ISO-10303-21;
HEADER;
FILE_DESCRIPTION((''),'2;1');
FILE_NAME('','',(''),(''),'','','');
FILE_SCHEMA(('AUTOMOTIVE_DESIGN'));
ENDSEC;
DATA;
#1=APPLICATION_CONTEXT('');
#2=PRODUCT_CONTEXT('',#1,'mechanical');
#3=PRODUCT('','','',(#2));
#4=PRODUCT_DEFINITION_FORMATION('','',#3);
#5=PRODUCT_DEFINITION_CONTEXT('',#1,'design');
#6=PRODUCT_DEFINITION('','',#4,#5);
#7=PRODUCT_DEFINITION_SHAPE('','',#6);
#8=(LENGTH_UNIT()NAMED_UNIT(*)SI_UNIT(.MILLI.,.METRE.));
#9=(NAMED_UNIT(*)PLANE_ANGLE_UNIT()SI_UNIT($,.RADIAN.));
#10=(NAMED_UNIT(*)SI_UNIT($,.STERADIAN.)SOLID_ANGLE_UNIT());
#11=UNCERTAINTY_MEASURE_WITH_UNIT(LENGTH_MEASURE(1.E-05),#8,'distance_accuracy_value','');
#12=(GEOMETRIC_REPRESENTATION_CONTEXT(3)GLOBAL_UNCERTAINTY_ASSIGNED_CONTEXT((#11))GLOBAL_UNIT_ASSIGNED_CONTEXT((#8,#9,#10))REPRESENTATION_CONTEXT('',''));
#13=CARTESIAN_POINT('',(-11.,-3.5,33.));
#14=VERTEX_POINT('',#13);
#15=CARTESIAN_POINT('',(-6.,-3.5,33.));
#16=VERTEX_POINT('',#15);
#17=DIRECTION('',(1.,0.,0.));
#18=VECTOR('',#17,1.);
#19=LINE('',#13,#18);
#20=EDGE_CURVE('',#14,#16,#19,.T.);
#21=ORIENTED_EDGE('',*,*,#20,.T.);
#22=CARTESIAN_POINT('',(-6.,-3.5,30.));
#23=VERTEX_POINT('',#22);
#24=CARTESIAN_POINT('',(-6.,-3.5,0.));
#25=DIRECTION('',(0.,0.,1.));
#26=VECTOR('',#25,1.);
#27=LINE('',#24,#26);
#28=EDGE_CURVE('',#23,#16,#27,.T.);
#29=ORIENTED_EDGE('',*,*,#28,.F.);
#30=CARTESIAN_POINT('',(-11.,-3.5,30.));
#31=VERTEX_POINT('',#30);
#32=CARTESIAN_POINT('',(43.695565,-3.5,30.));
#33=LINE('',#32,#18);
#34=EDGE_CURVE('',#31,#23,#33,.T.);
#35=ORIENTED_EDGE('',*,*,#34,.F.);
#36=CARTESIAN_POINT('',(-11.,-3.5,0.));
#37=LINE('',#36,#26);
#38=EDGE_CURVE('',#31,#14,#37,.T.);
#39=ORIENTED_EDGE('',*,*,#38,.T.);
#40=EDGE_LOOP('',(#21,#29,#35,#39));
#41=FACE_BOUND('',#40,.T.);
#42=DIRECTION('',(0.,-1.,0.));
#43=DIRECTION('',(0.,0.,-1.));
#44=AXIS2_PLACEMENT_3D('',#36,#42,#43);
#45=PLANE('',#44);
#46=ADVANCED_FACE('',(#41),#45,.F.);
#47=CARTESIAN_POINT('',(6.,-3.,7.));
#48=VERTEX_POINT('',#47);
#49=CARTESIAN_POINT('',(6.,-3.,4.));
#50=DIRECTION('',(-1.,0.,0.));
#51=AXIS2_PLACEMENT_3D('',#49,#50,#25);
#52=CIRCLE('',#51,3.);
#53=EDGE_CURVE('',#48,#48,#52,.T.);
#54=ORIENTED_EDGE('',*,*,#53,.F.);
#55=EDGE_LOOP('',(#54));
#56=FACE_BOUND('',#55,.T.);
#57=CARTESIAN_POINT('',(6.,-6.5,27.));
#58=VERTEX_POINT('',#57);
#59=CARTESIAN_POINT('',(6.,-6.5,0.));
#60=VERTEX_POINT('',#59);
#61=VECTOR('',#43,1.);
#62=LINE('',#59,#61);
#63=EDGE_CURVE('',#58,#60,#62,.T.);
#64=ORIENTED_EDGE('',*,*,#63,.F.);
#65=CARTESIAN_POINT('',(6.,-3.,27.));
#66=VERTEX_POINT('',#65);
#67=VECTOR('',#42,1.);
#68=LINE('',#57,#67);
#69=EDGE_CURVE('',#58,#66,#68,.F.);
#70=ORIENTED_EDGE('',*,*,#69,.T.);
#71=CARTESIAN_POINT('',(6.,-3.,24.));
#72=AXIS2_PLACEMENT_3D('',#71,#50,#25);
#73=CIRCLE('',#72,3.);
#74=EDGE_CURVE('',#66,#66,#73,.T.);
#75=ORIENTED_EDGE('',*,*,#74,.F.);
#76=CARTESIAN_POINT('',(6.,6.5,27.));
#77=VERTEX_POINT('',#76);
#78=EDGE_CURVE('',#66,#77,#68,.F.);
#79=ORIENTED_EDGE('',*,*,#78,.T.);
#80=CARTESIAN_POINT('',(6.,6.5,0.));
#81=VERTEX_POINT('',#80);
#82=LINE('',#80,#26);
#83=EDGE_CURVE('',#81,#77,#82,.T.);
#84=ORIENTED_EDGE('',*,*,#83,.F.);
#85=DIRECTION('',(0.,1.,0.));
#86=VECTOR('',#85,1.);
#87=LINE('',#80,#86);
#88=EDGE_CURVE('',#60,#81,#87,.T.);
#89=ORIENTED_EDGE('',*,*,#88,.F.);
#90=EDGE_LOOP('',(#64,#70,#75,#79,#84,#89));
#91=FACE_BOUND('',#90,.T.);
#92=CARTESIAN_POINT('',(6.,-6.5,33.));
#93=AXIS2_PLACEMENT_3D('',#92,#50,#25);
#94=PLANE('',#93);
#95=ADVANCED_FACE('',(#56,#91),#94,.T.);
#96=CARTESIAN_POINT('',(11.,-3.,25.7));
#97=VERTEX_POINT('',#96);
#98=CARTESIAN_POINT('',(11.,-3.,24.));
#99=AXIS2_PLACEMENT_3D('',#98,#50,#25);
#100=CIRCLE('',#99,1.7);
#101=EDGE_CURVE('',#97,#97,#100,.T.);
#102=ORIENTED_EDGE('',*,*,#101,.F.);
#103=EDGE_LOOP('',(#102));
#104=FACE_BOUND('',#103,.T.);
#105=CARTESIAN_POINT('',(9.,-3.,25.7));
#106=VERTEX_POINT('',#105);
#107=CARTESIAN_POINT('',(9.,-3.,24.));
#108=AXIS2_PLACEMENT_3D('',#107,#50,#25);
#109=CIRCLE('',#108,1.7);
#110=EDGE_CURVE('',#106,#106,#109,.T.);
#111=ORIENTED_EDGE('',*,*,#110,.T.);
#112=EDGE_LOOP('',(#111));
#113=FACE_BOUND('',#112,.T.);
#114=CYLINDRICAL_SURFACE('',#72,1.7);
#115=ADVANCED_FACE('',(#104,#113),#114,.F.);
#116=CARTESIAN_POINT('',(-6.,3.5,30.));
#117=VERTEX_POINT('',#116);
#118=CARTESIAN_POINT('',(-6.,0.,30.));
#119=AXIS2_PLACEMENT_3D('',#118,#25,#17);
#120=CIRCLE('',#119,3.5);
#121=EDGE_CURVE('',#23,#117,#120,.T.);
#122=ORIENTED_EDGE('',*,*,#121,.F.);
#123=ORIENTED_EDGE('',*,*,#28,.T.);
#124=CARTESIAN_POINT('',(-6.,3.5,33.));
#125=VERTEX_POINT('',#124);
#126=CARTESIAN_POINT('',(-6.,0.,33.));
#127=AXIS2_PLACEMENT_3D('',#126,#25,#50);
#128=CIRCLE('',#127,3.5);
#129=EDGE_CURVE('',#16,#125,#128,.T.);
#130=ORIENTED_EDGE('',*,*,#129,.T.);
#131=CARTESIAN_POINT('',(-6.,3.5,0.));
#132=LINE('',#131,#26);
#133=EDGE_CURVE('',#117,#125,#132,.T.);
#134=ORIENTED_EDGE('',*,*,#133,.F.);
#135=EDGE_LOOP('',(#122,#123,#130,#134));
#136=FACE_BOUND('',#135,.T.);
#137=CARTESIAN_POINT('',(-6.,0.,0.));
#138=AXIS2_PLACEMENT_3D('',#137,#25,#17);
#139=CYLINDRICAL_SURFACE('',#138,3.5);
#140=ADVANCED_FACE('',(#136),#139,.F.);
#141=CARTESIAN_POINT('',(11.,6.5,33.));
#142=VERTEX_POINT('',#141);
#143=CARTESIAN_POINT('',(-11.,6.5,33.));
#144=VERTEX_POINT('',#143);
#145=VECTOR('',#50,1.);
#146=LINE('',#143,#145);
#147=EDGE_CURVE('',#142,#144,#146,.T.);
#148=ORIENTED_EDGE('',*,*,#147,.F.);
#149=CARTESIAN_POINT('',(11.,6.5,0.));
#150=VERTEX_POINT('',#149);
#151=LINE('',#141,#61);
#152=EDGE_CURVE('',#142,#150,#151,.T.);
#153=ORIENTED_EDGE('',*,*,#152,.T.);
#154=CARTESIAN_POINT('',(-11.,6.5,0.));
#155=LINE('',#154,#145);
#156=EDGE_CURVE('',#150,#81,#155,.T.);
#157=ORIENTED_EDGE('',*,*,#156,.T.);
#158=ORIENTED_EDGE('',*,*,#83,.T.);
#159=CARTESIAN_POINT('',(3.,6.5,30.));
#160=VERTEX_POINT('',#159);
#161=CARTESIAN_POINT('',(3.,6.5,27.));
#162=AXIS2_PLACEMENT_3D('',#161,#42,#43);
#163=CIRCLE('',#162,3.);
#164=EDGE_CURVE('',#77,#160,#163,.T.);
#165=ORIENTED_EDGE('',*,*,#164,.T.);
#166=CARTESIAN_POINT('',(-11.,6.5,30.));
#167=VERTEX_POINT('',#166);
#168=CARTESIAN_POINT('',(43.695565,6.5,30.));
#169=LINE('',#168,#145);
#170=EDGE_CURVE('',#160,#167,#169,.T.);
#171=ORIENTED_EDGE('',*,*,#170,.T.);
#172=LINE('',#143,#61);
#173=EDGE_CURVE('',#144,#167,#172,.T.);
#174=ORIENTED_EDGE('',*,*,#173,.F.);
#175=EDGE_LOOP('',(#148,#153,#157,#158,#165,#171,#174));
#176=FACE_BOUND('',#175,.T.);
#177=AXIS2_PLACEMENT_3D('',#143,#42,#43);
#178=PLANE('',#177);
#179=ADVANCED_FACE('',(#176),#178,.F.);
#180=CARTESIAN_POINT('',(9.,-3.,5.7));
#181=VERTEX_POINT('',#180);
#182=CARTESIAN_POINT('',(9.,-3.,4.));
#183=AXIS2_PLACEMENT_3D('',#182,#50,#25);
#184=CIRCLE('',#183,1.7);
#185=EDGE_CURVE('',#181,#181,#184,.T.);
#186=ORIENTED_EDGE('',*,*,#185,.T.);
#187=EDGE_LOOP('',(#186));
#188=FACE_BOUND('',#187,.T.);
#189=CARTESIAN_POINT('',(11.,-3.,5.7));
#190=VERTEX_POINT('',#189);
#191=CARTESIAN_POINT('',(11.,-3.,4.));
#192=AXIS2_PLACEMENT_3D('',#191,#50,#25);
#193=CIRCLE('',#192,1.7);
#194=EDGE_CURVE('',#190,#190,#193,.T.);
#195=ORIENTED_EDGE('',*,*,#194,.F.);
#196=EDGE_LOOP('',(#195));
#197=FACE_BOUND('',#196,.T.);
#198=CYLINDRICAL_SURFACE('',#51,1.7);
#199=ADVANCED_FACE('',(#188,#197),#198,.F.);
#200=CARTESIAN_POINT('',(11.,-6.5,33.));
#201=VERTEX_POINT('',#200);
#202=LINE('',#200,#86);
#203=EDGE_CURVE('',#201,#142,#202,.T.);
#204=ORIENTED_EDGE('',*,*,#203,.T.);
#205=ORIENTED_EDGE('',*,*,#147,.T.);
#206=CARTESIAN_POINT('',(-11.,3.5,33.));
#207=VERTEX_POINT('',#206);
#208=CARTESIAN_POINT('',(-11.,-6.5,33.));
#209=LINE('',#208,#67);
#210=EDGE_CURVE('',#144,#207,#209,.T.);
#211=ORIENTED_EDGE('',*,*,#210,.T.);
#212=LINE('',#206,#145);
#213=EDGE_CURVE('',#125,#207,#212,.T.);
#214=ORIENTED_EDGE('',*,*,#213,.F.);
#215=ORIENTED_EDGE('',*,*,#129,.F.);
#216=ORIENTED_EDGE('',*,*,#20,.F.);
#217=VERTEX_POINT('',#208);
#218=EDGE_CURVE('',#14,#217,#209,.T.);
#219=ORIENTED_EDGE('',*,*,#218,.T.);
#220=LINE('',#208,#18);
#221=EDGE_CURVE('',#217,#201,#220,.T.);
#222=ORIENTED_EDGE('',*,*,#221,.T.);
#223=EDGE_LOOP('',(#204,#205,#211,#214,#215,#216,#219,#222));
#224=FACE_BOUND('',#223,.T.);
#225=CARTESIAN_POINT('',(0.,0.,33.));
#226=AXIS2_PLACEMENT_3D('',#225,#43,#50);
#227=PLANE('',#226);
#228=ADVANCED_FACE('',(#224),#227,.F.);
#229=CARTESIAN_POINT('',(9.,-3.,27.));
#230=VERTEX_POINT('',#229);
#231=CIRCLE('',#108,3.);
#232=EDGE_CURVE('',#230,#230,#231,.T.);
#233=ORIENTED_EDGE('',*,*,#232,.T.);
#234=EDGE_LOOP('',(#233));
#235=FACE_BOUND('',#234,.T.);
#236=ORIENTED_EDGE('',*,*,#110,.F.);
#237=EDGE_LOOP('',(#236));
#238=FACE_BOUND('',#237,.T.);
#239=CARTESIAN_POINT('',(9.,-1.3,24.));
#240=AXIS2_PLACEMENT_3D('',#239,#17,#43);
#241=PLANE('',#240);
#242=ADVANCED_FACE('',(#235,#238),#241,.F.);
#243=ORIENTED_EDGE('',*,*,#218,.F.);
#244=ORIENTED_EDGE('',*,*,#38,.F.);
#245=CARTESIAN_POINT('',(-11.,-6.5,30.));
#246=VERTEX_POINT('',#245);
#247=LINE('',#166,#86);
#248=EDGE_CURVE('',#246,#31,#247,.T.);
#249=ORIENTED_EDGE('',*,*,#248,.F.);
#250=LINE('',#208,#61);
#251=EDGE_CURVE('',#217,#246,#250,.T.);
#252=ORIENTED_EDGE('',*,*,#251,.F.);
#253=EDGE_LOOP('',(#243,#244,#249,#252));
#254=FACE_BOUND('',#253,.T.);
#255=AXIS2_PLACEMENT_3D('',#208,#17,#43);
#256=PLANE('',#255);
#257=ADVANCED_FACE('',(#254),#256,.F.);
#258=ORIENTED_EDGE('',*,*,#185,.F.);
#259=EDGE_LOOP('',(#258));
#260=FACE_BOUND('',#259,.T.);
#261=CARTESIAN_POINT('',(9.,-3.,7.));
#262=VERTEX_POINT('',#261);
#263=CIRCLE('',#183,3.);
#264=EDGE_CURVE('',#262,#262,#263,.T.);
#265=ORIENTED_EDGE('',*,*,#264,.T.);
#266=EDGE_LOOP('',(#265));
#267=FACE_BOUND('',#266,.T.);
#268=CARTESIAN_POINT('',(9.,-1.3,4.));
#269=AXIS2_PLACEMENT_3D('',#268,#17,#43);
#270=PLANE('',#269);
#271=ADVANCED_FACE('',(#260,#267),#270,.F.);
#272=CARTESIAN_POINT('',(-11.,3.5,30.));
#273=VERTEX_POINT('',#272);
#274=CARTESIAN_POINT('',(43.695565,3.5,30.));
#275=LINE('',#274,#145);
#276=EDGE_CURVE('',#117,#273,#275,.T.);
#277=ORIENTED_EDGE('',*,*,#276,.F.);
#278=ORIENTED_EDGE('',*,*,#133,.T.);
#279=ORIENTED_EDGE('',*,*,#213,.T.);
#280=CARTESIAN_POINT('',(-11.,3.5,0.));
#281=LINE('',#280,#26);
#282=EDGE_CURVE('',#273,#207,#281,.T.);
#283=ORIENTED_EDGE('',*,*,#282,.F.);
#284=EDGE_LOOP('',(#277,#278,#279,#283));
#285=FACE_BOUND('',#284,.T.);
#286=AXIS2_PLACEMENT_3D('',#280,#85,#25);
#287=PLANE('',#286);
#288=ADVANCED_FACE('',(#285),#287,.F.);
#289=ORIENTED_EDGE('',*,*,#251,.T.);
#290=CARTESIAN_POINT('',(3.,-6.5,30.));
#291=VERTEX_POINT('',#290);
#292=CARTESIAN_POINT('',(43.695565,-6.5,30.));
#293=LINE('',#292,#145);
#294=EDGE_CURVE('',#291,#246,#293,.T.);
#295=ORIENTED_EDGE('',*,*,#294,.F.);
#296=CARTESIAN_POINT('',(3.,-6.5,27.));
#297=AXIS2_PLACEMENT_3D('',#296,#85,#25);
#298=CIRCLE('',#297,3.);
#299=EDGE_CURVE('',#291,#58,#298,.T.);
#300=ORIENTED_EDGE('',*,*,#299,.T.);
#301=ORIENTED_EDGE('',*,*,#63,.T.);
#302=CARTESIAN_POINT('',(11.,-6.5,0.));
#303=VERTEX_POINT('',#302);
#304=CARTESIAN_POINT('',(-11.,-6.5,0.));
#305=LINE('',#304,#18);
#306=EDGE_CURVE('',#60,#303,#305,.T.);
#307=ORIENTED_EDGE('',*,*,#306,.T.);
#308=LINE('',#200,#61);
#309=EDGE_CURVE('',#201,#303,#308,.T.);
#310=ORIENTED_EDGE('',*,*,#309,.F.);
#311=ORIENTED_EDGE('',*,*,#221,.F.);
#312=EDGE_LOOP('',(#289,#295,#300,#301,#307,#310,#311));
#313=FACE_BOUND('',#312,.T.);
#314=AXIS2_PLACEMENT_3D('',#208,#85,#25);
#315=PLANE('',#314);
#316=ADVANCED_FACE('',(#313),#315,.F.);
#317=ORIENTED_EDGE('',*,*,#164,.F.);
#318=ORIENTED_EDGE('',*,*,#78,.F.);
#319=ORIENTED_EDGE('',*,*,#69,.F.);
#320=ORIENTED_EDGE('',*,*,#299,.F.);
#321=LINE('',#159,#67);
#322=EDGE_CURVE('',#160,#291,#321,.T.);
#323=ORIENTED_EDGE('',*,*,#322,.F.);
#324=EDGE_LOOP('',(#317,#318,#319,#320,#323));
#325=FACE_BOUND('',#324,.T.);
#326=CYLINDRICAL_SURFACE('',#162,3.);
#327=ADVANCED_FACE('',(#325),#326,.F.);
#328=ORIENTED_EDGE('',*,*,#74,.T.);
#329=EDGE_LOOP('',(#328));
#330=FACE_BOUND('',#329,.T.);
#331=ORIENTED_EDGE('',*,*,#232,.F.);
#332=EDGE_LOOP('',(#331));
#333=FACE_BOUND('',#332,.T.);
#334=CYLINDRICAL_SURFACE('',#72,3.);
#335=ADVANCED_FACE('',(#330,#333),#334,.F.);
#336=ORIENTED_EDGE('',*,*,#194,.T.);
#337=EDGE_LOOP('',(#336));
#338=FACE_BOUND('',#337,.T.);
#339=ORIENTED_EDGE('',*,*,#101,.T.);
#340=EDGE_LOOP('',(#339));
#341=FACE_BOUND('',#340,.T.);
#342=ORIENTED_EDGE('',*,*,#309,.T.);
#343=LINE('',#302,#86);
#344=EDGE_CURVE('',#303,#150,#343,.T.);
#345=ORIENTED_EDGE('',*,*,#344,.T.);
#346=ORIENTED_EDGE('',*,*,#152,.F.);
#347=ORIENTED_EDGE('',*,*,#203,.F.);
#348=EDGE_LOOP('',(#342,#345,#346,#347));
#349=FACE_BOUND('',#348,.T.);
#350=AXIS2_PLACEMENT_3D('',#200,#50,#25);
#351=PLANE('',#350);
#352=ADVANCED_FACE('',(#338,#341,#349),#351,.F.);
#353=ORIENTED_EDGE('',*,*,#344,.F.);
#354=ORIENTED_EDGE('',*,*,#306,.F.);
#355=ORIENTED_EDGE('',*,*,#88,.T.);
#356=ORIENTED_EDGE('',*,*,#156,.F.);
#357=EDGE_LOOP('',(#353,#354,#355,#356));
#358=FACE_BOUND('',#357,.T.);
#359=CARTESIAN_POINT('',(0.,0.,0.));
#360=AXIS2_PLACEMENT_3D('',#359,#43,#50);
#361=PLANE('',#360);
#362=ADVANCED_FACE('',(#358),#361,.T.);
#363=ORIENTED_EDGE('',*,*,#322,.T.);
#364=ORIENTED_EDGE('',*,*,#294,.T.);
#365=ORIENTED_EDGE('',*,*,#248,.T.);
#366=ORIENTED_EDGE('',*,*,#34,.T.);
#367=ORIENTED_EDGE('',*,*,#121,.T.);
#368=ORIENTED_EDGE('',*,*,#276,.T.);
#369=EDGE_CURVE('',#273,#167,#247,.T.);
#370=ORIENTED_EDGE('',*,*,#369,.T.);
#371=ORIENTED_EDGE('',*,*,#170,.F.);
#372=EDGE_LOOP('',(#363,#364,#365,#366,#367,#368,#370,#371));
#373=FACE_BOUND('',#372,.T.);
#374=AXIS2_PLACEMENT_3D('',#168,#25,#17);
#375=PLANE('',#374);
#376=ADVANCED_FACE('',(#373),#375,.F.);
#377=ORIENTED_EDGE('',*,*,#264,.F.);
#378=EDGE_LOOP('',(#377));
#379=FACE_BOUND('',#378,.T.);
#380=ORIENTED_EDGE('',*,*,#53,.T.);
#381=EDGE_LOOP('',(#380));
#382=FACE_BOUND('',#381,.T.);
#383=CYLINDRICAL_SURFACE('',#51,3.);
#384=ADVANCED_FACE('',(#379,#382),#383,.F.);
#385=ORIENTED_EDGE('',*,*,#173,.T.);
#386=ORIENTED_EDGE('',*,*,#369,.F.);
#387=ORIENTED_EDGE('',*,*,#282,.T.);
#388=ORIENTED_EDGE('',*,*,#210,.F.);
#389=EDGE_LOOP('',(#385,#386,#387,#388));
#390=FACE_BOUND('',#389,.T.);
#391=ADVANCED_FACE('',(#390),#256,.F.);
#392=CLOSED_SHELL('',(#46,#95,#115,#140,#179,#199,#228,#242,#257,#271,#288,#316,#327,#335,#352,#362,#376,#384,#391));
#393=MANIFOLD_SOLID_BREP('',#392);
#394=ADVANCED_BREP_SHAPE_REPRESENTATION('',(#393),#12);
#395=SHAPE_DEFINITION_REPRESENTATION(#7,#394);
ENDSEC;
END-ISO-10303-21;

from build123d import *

# Parameters (mm, degrees)
SKETCH_1_W                = 22
SKETCH_1_H                = 13
EXTRUDE_1_DEPTH           = 33
SKETCH_5_W                = 30
SKETCH_5_H                = 13
CUT_EXTRUDE_2_DEPTH       = 17
HOLE_WIZARD_1_D           = 3.4
HOLE_WIZARD_1_CBORE_D     = 6
HOLE_WIZARD_1_CBORE_DEPTH = 3
CUT_EXTRUDE_4_DEPTH       = 36.387144558
FILLET_1_R                = 3


with BuildPart() as part:
    # 草图1 → 凸台-拉伸1 (new body)
    with BuildSketch(Plane.XY):
        Rectangle(SKETCH_1_W, SKETCH_1_H)
    extrude(amount=EXTRUDE_1_DEPTH)

    # 草图5 → 切除-拉伸2 (cut)
    with BuildSketch(Plane.ZY.offset(11)):
        with Locations((15, 0)):
            Rectangle(SKETCH_5_W, SKETCH_5_H)
    extrude(amount=-CUT_EXTRUDE_2_DEPTH, mode=Mode.SUBTRACT)

    # 打孔尺寸根据内六角圆柱头螺钉的类型1 (through all)
    with Locations(Plane(origin=(6, 5.532872615, -4.059557146), x_dir=(0, 0, 1), z_dir=(-1, 0, 0))):
        with Locations((28.059557146, -8.532872615), (8.059557146, -8.532872615)):
            CounterBoreHole(HOLE_WIZARD_1_D / 2, HOLE_WIZARD_1_CBORE_D / 2, HOLE_WIZARD_1_CBORE_DEPTH)

    # 草图12 → 切除-拉伸4 (cut, through all)
    with BuildSketch(Plane.XY.offset(33)):
        with BuildLine():
            Line((-11, -3.5), (-6, -3.5))
            ThreePointArc((-6, -3.5), (-2.5, 0), (-6, 3.5))
            Line((-6, 3.5), (-11, 3.5))
            Line((-11, 3.5), (-11, -3.5))
        make_face()
    extrude(amount=-CUT_EXTRUDE_4_DEPTH, mode=Mode.SUBTRACT)

    # 圆角1
    fillet_1_edges = [part.edges().sort_by_distance(p)[0] for p in [
        (6, 0, 30),
    ]]
    fillet(fillet_1_edges, radius=FILLET_1_R - 0.0001)  # a hair under: the kernel refuses the full size


solid = part.part
